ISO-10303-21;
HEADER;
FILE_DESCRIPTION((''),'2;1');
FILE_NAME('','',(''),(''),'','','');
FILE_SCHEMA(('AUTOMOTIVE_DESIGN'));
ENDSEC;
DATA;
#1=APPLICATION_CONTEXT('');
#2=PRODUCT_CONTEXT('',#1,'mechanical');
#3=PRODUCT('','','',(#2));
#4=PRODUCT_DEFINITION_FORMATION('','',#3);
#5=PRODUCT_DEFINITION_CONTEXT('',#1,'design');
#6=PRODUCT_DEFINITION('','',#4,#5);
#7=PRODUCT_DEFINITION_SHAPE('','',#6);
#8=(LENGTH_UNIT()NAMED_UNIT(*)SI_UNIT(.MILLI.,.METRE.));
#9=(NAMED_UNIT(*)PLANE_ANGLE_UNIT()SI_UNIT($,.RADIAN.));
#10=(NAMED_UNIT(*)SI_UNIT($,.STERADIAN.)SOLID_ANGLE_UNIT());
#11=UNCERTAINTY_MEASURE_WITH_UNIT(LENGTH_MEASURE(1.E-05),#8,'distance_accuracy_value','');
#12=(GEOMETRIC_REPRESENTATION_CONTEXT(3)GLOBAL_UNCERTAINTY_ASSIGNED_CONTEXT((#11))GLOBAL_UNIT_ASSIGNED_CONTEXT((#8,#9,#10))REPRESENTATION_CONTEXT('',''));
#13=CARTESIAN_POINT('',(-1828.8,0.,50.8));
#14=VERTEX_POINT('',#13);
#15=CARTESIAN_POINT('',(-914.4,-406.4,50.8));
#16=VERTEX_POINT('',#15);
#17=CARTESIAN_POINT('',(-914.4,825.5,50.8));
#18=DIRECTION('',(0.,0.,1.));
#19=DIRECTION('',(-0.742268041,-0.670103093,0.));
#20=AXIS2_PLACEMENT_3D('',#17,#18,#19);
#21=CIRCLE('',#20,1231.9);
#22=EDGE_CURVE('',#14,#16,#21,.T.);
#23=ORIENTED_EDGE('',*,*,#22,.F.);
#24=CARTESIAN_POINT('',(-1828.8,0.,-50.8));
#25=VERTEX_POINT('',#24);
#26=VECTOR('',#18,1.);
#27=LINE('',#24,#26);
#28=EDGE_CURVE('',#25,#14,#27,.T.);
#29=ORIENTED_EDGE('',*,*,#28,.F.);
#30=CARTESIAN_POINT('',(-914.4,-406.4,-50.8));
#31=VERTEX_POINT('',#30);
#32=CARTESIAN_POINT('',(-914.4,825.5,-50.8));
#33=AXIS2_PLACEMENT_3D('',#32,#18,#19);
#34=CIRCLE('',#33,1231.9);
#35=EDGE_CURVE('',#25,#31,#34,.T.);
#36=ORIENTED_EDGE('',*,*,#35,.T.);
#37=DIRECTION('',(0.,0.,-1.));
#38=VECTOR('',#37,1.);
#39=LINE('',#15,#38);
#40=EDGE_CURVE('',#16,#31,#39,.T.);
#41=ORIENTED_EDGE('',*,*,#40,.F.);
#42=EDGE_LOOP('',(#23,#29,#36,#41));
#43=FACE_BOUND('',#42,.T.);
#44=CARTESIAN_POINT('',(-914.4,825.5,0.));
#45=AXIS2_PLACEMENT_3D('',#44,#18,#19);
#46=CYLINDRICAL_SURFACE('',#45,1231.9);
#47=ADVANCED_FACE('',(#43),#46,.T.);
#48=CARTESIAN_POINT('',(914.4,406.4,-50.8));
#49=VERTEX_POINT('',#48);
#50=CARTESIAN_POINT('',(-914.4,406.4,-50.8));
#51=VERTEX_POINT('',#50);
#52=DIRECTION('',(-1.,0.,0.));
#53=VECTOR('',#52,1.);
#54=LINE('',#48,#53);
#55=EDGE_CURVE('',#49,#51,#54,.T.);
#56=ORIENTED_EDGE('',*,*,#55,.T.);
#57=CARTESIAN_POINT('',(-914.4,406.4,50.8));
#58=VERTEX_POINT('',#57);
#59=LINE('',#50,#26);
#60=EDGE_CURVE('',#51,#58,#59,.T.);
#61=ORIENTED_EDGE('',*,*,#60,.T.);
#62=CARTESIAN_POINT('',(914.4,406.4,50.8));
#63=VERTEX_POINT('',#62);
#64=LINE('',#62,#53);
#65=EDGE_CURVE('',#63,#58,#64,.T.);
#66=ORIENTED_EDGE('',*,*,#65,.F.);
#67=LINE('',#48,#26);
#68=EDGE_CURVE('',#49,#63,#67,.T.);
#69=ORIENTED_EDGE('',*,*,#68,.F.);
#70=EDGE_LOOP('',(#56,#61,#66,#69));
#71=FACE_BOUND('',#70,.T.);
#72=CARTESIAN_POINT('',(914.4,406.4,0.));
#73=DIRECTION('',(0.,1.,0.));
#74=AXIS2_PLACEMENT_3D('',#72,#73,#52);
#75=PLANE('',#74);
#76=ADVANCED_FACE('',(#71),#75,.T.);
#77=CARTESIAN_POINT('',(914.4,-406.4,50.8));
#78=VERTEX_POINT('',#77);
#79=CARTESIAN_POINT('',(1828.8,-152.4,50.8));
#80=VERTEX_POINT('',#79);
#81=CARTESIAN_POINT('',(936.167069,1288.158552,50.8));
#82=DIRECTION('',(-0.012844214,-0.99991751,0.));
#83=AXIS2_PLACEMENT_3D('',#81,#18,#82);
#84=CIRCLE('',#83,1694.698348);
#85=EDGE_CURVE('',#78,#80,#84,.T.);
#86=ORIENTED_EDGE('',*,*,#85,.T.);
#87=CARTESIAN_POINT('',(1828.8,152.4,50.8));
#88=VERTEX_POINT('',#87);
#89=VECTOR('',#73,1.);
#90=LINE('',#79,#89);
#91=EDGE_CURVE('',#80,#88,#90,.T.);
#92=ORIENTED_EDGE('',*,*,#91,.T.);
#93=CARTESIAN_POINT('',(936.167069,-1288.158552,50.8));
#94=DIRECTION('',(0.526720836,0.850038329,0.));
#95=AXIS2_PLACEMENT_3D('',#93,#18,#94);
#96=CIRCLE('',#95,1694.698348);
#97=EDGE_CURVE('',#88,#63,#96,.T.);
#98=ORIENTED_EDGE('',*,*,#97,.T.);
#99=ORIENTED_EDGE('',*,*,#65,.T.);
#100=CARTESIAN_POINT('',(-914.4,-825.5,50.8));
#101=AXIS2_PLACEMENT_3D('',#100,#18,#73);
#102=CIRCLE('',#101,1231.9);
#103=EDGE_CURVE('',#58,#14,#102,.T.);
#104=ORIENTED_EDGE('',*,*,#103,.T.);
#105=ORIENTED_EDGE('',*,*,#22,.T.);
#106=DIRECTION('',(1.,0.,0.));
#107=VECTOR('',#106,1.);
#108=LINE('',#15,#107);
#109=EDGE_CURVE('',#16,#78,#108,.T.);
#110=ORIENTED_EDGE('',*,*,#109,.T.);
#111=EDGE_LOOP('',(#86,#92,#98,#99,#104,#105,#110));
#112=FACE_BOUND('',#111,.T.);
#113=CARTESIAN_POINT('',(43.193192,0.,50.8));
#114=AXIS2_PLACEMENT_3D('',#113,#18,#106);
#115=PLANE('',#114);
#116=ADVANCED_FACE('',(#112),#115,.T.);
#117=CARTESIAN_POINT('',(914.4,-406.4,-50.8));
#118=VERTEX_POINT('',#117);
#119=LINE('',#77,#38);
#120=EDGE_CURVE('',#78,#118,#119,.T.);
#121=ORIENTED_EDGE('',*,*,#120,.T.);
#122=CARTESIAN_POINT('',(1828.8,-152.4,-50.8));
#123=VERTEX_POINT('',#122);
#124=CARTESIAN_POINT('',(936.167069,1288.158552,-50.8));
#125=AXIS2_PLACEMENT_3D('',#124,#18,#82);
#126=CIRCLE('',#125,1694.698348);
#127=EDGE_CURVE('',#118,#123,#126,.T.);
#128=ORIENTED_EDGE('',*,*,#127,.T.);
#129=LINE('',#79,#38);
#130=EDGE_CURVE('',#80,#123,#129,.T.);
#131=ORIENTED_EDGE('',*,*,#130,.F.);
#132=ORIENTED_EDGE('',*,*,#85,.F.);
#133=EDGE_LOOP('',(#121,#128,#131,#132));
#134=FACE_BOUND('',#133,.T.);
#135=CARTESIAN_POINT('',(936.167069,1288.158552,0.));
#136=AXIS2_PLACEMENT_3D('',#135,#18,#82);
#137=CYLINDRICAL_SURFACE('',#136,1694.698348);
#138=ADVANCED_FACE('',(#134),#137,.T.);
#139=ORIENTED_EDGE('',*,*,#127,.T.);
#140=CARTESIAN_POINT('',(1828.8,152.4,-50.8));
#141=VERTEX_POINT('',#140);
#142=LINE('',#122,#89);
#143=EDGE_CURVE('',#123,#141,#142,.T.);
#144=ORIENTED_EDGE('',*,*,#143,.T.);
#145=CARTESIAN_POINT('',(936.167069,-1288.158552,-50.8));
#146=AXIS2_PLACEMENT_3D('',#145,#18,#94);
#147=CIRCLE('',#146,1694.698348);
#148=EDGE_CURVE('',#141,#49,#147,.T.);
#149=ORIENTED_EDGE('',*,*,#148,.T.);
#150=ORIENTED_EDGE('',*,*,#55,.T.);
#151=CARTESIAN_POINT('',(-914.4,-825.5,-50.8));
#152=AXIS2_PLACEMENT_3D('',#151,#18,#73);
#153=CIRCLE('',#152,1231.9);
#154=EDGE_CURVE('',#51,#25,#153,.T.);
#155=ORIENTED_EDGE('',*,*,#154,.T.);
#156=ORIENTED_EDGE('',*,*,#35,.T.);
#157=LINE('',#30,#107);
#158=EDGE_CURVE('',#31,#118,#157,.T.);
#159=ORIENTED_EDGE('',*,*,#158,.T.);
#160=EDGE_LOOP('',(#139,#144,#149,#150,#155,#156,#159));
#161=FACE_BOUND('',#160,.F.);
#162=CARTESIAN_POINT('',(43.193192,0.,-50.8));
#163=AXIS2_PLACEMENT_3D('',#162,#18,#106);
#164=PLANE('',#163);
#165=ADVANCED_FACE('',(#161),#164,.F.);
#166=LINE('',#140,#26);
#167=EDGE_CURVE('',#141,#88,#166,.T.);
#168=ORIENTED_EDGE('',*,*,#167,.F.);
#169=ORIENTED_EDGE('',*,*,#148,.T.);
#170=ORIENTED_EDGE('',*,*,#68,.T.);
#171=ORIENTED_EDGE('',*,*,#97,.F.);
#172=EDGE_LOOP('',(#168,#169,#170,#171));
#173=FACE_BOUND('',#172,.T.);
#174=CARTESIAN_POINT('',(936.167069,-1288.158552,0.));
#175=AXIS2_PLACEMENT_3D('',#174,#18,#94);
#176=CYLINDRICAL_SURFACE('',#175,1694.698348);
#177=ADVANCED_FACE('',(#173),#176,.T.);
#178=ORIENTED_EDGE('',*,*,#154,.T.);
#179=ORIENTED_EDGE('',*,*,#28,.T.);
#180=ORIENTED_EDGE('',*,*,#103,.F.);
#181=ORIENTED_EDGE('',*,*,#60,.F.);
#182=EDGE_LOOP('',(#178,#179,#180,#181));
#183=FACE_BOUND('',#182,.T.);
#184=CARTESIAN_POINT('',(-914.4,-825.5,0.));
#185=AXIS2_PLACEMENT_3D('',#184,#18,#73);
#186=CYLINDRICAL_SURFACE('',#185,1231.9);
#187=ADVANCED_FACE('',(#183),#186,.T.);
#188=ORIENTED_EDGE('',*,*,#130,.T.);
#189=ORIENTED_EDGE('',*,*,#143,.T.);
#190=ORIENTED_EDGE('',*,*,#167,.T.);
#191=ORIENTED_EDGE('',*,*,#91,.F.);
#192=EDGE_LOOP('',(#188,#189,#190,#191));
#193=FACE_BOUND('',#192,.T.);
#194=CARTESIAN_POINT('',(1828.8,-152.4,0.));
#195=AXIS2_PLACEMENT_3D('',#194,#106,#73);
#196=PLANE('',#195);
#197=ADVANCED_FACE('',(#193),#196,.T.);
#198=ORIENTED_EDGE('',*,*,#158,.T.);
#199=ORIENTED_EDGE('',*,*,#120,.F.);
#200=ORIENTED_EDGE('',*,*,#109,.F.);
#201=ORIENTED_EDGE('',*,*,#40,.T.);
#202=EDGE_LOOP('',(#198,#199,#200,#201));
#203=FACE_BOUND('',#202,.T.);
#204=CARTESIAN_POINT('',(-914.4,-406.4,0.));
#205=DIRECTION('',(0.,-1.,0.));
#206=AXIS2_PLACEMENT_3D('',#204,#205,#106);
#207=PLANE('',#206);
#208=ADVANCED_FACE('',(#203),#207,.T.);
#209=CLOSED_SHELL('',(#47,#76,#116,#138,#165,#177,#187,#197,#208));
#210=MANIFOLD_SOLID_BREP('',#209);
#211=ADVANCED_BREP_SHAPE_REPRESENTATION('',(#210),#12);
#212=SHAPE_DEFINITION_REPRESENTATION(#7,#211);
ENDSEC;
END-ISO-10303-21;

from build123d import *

# Parameters (mm, degrees)
F1_DEPTH      = 50.8
F1_DEPTH_BACK = 50.8


# Not quite as in the source:
# - the program builds the solid bodies; features that only make, move or delete a surface that nothing else refers to are left out


with BuildPart() as f1:
    # F0 (on Top) → F1 (new body, two sides)
    with BuildSketch(Plane.XY) as f1_sk:
        with BuildLine():
            Line((1828.8, -152.4), (1828.8, 152.4))
            ThreePointArc((1828.8, 152.4), (1389.7426827553, 344.713657919), (914.4, 406.4))
            Line((914.4, 406.4), (0, 406.4))
            Line((0, 406.4), (-914.4, 406.4))
            ThreePointArc((-914.4, 406.4), (-1414.7219763312, 300.2244467453), (-1828.8, 0))
            ThreePointArc((-1828.8, 0), (-1414.7219763312, -300.2244467453), (-914.4, -406.4))
            Line((-914.4, -406.4), (0, -406.4))
            Line((0, -406.4), (914.4, -406.4))
            ThreePointArc((914.4, -406.4), (1389.7426827553, -344.713657919), (1828.8, -152.4))
        make_face()
    extrude(amount=F1_DEPTH)
    extrude(f1_sk.sketch, amount=-F1_DEPTH_BACK)


solid = f1.part
